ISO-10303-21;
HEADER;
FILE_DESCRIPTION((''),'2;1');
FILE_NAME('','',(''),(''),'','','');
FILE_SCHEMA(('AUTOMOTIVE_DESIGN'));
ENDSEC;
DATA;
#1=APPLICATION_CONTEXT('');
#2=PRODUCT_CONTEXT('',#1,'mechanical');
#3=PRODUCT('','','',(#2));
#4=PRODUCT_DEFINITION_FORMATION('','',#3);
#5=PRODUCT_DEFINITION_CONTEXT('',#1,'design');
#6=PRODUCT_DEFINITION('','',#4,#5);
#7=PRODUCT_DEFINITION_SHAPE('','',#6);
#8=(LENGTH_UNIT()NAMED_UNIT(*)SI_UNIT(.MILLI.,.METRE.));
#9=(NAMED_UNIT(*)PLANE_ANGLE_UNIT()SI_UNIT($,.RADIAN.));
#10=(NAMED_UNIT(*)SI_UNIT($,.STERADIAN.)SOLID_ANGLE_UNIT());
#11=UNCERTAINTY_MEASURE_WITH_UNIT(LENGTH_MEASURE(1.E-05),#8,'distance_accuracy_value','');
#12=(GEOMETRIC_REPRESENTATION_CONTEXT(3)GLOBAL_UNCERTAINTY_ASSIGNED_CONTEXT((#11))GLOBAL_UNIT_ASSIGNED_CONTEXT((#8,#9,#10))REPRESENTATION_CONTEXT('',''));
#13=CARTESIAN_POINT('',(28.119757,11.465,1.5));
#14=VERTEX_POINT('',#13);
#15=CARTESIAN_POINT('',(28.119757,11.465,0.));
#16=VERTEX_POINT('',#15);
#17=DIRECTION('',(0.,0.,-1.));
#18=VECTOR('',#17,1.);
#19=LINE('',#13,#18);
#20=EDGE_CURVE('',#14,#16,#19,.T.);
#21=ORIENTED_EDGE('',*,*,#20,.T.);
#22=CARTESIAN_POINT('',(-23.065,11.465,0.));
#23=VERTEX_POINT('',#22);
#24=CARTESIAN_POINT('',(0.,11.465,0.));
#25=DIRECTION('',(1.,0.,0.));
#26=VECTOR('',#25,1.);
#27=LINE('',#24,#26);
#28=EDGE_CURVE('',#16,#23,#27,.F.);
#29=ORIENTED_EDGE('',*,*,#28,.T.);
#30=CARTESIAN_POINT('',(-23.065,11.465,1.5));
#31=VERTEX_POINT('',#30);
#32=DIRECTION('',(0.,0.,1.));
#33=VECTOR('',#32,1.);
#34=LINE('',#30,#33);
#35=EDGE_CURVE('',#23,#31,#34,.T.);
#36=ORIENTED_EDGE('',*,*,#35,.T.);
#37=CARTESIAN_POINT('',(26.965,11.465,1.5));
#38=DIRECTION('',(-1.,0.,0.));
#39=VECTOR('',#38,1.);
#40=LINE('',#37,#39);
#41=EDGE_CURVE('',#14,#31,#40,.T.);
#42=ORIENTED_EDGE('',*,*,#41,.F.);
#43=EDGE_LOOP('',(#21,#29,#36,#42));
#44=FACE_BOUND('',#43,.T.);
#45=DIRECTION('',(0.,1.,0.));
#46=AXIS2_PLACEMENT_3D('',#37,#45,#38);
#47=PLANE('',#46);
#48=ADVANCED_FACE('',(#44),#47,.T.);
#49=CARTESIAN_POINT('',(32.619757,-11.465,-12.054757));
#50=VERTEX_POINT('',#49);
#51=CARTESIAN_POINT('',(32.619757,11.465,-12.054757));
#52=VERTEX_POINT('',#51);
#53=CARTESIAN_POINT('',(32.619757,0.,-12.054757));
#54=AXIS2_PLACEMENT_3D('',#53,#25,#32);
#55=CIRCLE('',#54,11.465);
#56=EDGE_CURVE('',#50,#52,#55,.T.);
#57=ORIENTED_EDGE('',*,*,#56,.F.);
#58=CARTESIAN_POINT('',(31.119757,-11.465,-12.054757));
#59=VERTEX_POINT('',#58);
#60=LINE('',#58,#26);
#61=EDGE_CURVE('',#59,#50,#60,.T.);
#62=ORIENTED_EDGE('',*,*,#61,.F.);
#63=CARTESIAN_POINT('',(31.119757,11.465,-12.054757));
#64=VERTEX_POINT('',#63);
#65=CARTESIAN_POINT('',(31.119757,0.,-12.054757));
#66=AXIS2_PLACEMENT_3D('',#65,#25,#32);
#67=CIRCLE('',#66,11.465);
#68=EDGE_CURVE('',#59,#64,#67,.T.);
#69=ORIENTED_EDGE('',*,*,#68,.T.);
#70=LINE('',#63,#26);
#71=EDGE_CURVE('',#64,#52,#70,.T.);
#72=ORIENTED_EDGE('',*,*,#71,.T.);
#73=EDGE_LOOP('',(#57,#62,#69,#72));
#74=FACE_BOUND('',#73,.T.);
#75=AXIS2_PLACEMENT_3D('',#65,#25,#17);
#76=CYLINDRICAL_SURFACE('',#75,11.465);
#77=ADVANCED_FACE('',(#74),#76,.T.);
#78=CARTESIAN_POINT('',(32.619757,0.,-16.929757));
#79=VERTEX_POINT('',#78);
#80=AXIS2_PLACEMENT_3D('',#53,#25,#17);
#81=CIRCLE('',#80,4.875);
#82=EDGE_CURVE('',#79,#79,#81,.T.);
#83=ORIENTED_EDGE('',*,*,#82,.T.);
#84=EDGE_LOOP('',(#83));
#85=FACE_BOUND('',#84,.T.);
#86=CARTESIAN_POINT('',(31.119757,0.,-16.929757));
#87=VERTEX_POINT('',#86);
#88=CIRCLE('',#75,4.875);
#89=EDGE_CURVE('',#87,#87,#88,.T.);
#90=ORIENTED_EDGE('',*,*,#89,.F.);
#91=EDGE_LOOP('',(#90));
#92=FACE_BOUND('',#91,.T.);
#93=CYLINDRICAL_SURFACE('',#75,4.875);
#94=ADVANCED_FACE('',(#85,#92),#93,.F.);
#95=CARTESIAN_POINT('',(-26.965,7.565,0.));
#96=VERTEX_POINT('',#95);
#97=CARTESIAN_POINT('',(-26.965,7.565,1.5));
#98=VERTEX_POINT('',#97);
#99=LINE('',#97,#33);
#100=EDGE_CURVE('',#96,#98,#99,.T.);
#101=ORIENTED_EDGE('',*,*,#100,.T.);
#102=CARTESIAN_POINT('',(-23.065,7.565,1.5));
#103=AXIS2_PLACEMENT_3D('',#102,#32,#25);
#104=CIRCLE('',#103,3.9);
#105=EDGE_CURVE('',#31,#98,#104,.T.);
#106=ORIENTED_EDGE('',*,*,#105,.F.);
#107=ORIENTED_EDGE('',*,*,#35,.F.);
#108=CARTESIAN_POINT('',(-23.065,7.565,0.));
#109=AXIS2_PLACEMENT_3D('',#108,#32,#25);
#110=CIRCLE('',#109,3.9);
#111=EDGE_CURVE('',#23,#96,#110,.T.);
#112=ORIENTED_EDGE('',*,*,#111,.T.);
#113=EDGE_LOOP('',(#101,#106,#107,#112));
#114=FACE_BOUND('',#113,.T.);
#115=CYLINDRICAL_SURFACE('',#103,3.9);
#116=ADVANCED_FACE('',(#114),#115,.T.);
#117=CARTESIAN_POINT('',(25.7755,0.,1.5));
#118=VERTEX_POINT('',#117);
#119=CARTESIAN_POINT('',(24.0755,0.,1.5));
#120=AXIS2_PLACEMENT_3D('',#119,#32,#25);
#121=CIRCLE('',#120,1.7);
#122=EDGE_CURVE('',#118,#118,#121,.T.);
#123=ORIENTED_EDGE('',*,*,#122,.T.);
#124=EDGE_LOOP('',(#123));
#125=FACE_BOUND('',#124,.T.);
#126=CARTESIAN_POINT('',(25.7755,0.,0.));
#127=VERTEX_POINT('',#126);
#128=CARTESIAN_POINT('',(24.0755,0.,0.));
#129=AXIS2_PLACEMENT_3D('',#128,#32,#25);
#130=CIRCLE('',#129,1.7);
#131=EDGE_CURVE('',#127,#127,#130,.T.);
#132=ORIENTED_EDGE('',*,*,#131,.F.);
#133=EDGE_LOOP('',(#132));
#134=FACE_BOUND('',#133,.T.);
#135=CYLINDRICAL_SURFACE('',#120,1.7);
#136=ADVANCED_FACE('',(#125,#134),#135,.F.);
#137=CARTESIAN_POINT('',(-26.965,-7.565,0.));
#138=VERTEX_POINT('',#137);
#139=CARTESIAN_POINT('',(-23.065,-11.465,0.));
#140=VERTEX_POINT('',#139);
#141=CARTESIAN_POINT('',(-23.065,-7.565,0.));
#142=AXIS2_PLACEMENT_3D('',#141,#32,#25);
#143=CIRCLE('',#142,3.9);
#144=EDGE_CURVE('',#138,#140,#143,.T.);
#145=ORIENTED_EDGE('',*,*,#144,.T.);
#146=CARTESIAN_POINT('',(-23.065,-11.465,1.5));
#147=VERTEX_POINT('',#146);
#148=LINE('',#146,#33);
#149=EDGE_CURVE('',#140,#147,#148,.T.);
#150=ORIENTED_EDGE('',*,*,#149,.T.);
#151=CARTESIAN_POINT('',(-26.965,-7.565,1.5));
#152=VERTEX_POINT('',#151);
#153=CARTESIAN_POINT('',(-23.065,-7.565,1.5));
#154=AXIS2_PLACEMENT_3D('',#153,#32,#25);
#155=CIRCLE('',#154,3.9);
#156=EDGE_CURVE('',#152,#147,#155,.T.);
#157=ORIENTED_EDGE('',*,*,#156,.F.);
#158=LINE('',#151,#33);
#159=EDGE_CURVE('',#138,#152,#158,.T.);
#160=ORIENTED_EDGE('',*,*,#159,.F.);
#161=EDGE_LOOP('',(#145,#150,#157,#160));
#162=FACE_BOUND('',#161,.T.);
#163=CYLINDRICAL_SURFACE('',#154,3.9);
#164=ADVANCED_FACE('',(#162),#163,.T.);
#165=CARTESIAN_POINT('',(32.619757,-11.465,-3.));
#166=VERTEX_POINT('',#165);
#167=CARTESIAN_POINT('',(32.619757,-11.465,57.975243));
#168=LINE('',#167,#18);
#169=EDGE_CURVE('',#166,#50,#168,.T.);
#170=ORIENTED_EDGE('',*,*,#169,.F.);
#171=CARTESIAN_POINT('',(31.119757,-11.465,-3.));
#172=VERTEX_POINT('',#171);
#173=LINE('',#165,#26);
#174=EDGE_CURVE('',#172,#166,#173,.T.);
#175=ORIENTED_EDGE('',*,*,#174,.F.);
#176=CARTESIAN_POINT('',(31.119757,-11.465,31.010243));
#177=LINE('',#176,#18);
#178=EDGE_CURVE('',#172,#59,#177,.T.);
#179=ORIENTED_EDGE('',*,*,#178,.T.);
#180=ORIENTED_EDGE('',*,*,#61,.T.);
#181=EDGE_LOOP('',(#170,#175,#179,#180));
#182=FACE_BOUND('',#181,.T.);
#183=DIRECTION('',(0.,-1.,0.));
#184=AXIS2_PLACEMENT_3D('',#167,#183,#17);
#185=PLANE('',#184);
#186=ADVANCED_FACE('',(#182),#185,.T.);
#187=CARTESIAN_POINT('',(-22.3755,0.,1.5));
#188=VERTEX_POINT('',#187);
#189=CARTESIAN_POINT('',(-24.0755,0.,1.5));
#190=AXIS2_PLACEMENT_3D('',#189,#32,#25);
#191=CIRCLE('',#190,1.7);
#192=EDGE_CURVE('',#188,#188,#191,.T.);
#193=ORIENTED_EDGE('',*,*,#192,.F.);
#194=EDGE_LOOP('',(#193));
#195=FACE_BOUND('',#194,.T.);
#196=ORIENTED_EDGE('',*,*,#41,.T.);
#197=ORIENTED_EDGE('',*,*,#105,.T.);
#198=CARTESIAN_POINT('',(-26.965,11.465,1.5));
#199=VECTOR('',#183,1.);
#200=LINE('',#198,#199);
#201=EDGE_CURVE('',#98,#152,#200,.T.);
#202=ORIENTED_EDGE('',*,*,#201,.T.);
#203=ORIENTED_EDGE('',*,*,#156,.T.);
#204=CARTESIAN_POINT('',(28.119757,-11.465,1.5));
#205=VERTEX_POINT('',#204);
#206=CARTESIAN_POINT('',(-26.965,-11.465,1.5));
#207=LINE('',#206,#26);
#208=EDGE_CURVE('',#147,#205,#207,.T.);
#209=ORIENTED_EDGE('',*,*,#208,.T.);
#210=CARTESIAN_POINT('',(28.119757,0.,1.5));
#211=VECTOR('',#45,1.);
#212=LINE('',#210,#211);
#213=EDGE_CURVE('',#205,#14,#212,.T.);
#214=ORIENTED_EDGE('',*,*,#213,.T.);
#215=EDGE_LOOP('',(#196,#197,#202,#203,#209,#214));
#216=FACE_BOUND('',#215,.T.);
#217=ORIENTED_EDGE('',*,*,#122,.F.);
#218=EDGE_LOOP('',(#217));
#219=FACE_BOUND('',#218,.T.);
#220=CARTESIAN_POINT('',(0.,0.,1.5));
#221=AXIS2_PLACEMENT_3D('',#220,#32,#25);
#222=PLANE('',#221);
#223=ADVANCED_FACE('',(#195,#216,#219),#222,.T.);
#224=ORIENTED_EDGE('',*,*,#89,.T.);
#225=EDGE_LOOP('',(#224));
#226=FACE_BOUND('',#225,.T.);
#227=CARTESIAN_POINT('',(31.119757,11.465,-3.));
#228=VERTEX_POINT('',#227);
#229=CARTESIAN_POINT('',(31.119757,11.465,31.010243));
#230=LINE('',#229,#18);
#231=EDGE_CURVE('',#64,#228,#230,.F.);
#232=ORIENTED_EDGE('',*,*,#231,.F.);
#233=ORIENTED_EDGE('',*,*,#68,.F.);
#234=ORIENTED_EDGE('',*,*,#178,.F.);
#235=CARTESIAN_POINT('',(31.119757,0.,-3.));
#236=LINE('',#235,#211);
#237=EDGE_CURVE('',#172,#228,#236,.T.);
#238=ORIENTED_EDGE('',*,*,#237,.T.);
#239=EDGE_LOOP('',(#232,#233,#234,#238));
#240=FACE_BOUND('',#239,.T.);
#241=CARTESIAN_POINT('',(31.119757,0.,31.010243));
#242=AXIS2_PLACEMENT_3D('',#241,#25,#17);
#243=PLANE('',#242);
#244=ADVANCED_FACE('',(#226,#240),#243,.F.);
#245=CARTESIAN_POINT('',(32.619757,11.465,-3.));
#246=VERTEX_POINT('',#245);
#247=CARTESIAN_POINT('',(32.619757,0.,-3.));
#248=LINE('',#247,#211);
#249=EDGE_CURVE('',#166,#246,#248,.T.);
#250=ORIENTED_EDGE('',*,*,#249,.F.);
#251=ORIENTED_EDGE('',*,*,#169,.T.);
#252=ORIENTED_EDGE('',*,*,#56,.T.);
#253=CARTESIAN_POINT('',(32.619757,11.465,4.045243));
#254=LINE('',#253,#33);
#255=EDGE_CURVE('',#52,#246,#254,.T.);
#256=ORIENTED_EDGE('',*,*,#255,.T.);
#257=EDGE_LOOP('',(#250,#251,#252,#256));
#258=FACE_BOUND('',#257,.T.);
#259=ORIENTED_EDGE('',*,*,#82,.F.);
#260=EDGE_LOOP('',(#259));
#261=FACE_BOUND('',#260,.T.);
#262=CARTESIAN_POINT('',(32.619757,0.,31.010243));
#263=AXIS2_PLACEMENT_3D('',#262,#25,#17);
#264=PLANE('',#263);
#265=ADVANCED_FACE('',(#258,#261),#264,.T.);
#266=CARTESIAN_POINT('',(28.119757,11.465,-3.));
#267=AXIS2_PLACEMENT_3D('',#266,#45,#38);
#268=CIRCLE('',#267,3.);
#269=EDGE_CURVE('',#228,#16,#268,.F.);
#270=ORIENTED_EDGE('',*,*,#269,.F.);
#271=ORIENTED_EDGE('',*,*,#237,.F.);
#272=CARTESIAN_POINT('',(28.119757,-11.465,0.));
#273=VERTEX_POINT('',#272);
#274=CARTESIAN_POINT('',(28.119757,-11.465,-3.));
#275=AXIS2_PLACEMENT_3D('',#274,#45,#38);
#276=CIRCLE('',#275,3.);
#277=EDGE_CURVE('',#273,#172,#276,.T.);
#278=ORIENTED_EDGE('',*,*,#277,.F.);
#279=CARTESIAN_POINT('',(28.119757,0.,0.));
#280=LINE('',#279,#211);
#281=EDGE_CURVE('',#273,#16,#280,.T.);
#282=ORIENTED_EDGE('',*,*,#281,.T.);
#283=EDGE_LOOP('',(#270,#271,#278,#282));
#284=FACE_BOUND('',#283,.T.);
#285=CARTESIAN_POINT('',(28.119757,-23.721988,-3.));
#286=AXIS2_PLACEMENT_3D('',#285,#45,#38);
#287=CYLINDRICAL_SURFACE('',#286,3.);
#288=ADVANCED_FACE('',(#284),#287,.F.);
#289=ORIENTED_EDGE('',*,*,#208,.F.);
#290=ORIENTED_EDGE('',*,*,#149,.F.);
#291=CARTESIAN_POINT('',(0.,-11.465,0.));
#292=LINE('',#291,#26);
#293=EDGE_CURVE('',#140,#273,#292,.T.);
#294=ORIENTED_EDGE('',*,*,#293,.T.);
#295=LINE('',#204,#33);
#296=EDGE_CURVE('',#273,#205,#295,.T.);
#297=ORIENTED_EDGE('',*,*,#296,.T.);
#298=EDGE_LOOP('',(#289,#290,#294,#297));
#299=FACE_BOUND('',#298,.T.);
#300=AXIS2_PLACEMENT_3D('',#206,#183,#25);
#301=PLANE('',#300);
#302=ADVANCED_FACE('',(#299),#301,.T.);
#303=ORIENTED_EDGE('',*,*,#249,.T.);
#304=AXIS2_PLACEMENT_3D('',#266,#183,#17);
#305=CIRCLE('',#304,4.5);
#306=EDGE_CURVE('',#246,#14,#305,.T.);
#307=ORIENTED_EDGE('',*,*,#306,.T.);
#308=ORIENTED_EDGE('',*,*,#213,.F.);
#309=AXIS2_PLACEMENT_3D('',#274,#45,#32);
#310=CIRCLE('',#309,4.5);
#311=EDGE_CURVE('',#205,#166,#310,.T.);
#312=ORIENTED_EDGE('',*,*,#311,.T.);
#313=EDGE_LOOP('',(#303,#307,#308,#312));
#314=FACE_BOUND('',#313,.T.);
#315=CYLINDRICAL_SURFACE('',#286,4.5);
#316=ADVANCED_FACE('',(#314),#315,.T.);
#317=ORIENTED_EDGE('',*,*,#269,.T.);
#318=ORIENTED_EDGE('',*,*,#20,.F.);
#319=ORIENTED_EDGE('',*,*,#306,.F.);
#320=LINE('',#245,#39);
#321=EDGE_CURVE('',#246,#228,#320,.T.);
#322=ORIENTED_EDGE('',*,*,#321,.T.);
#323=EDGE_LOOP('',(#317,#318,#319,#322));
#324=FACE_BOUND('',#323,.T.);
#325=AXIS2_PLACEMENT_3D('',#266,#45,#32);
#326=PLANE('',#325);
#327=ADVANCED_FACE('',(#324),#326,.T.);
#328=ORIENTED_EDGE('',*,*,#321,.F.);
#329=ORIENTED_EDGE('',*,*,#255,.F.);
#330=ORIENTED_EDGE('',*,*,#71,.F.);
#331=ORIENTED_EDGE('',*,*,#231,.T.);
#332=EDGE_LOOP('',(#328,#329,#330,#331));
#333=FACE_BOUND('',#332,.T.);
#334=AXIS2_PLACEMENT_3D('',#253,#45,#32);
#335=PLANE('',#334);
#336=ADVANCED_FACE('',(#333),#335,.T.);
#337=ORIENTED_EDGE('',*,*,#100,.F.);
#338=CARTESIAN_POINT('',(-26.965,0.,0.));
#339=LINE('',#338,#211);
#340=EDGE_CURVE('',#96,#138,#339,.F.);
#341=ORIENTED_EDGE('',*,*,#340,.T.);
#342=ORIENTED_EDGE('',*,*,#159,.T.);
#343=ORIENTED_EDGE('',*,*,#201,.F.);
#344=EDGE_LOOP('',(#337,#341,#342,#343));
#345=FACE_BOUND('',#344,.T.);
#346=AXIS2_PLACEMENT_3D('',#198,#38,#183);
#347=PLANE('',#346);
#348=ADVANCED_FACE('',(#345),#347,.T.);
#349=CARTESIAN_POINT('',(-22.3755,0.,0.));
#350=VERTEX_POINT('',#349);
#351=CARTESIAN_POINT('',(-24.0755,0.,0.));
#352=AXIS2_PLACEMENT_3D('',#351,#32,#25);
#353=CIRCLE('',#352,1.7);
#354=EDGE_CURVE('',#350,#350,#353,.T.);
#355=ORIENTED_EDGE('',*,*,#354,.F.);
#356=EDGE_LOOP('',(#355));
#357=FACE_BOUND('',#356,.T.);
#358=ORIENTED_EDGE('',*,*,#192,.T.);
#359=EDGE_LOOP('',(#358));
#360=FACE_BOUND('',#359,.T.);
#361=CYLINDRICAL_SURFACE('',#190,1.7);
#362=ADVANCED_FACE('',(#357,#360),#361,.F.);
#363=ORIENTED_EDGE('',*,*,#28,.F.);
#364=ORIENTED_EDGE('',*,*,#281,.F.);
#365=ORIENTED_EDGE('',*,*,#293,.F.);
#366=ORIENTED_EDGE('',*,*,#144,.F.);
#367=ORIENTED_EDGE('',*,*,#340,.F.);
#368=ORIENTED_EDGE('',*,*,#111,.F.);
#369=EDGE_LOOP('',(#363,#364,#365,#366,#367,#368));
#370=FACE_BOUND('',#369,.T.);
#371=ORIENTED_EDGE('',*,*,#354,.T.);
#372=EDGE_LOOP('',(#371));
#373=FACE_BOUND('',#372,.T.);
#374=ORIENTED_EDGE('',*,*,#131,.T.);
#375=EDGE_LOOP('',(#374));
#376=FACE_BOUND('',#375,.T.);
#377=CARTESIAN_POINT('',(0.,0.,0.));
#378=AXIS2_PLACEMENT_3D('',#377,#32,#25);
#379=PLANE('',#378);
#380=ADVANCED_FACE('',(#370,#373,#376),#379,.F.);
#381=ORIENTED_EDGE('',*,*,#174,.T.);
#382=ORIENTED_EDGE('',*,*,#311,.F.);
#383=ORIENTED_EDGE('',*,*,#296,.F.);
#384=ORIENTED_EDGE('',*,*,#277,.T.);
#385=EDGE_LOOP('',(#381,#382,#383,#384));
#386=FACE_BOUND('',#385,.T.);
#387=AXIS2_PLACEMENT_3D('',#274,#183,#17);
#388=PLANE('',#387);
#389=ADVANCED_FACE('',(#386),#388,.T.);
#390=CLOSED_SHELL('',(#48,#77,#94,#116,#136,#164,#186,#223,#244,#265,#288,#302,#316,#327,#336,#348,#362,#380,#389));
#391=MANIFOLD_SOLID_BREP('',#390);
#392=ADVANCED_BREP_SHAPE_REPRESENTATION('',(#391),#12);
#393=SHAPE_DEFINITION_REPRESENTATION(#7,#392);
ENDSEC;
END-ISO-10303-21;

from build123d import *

# Parameters (mm, degrees)
SKETCH1_W                  = 53.93
SKETCH1_H                  = 22.93
BOSS_EXTRUDE1_DEPTH        = 1.5
M3_CLEARANCE_HOLE1_D       = 3.4
M3_CLEARANCE_HOLE1_DEPTH   = 27
M3_CLEARANCE_HOLE1_TIP     = 1.021463052
FILLET1_R                  = 3.9
BOSS_EXTRUDE2_START        = -1.5
SKETCH4_R                  = 4.875
BOSS_EXTRUDE2_DEPTH        = 1.5
SKETCHED_START             = 32.144466887
SKETCHED_BEND1_OUTLINE_W   = 22.93
SKETCHED_BEND1_OUTLINE_H   = 1.5
SKETCHED_BEND1_DEPTH       = 23.855533113
SKETCHED_START_2           = 28.119756887
SKETCHED_BEND1_2_OUTLINE_R = 4.875
SKETCHED_BEND1_2_DEPTH     = 4.5
SKETCHED_START_3           = -11.465
SKETCHED_BEND1_3_DEPTH     = 22.93


with BuildPart() as part:
    # Sketch1 → Boss-Extrude1 (new body)
    with BuildSketch(Plane.XY.offset(1.5)):
        Rectangle(SKETCH1_W, SKETCH1_H)
    extrude(amount=-BOSS_EXTRUDE1_DEPTH)

    # M3 Clearance Hole1
    with Locations(Plane.XY.offset(1.5)):
        with Locations((-24.0755, 0), (24.0755, 0)):
            Hole(M3_CLEARANCE_HOLE1_D / 2, depth=M3_CLEARANCE_HOLE1_DEPTH)
            with Locations((0, 0, -(M3_CLEARANCE_HOLE1_DEPTH + M3_CLEARANCE_HOLE1_TIP / 2))):  # 118° drill point
                Cone(0, M3_CLEARANCE_HOLE1_D / 2, M3_CLEARANCE_HOLE1_TIP, mode=Mode.SUBTRACT)

    # Fillet1
    fillet1_edges = [part.edges().sort_by_distance(p)[0] for p in [
        (-26.965, -11.465, 0.75),
        (-26.965, 11.465, 0.75),
        (26.965, 11.465, 0.75),
        (26.965, -11.465, 0.75),
    ]]
    fillet(fillet1_edges, radius=FILLET1_R)

    # Sketch4 → Boss-Extrude2 (add)
    with BuildSketch(Plane.XY.offset(1.5).offset(BOSS_EXTRUDE2_START)):
        with BuildLine():
            Line((23.065, 11.465), (43.065, 11.465))
            ThreePointArc((43.065, 11.465), (54.53, 0), (43.065, -11.465))
            Line((43.065, -11.465), (23.065, -11.465))
            ThreePointArc((23.065, -11.465), (25.822716447, -10.322716447), (26.965, -7.565))
            Line((26.965, -7.565), (26.965, 7.565))
            ThreePointArc((26.965, 7.565), (25.822716447, 10.322716447), (23.065, 11.465))
        make_face()
        with Locations((43.065, 0)):
            Circle(SKETCH4_R, mode=Mode.SUBTRACT)
    extrude(amount=BOSS_EXTRUDE2_DEPTH)

    # Sketched Bend1: read off the stored shape, not the designer's step
    # Sketched Bend1 outline → Sketched Bend1 (cut)
    with BuildSketch(Plane.YZ.offset(SKETCHED_START)):
        with Locations((0, 0.75)):
            Rectangle(SKETCHED_BEND1_OUTLINE_W, SKETCHED_BEND1_OUTLINE_H)
    extrude(amount=SKETCHED_BEND1_DEPTH, mode=Mode.SUBTRACT)

    # Sketched Bend1 2 outline → Sketched Bend1 2 (add)
    with BuildSketch(Plane.YZ.offset(SKETCHED_START_2)):
        with BuildLine():
            Line((-11.465, 0), (-11.465, -12.054756887))
            ThreePointArc((-11.465, -12.054756887), (0, -23.519756887), (11.465, -12.054756887))
            Line((11.465, -12.054756887), (11.465, 0))
            Line((11.465, 0), (-11.465, 0))
        make_face()
        with Locations((0, -12.054756887)):
            Circle(SKETCHED_BEND1_2_OUTLINE_R, mode=Mode.SUBTRACT)
    extrude(amount=SKETCHED_BEND1_2_DEPTH)

    # Sketched Bend1 3 outline → Sketched Bend1 3 (cut)
    with BuildSketch(Plane(origin=(0, 0, 0), x_dir=(1, 0, 0), z_dir=(0, 1, 0)).offset(SKETCHED_START_3)):
        with BuildLine():
            ThreePointArc((28.119756887, 0), (30.241077231, 0.878679656), (31.119756887, 3))
            Line((31.119756887, 3), (31.119756887, 25))
            Line((31.119756887, 25), (28.119756887, 25))
            Line((28.119756887, 25), (28.119756887, 0))
        make_face()
        with BuildLine():
            Line((32.619756887, 0), (32.619756887, 3))
            ThreePointArc((32.619756887, 3), (31.301737402, -0.181980515), (28.119756887, -1.5))
            Line((28.119756887, -1.5), (27, -1.5))
            Line((27, -1.5), (27, -3))
            Line((27, -3), (32.144466887, -3))
            Line((32.144466887, -3), (32.144466887, 0))
            Line((32.144466887, 0), (32.619756887, 0))
        make_face()
    extrude(amount=SKETCHED_BEND1_3_DEPTH, mode=Mode.SUBTRACT)


solid = part.part
